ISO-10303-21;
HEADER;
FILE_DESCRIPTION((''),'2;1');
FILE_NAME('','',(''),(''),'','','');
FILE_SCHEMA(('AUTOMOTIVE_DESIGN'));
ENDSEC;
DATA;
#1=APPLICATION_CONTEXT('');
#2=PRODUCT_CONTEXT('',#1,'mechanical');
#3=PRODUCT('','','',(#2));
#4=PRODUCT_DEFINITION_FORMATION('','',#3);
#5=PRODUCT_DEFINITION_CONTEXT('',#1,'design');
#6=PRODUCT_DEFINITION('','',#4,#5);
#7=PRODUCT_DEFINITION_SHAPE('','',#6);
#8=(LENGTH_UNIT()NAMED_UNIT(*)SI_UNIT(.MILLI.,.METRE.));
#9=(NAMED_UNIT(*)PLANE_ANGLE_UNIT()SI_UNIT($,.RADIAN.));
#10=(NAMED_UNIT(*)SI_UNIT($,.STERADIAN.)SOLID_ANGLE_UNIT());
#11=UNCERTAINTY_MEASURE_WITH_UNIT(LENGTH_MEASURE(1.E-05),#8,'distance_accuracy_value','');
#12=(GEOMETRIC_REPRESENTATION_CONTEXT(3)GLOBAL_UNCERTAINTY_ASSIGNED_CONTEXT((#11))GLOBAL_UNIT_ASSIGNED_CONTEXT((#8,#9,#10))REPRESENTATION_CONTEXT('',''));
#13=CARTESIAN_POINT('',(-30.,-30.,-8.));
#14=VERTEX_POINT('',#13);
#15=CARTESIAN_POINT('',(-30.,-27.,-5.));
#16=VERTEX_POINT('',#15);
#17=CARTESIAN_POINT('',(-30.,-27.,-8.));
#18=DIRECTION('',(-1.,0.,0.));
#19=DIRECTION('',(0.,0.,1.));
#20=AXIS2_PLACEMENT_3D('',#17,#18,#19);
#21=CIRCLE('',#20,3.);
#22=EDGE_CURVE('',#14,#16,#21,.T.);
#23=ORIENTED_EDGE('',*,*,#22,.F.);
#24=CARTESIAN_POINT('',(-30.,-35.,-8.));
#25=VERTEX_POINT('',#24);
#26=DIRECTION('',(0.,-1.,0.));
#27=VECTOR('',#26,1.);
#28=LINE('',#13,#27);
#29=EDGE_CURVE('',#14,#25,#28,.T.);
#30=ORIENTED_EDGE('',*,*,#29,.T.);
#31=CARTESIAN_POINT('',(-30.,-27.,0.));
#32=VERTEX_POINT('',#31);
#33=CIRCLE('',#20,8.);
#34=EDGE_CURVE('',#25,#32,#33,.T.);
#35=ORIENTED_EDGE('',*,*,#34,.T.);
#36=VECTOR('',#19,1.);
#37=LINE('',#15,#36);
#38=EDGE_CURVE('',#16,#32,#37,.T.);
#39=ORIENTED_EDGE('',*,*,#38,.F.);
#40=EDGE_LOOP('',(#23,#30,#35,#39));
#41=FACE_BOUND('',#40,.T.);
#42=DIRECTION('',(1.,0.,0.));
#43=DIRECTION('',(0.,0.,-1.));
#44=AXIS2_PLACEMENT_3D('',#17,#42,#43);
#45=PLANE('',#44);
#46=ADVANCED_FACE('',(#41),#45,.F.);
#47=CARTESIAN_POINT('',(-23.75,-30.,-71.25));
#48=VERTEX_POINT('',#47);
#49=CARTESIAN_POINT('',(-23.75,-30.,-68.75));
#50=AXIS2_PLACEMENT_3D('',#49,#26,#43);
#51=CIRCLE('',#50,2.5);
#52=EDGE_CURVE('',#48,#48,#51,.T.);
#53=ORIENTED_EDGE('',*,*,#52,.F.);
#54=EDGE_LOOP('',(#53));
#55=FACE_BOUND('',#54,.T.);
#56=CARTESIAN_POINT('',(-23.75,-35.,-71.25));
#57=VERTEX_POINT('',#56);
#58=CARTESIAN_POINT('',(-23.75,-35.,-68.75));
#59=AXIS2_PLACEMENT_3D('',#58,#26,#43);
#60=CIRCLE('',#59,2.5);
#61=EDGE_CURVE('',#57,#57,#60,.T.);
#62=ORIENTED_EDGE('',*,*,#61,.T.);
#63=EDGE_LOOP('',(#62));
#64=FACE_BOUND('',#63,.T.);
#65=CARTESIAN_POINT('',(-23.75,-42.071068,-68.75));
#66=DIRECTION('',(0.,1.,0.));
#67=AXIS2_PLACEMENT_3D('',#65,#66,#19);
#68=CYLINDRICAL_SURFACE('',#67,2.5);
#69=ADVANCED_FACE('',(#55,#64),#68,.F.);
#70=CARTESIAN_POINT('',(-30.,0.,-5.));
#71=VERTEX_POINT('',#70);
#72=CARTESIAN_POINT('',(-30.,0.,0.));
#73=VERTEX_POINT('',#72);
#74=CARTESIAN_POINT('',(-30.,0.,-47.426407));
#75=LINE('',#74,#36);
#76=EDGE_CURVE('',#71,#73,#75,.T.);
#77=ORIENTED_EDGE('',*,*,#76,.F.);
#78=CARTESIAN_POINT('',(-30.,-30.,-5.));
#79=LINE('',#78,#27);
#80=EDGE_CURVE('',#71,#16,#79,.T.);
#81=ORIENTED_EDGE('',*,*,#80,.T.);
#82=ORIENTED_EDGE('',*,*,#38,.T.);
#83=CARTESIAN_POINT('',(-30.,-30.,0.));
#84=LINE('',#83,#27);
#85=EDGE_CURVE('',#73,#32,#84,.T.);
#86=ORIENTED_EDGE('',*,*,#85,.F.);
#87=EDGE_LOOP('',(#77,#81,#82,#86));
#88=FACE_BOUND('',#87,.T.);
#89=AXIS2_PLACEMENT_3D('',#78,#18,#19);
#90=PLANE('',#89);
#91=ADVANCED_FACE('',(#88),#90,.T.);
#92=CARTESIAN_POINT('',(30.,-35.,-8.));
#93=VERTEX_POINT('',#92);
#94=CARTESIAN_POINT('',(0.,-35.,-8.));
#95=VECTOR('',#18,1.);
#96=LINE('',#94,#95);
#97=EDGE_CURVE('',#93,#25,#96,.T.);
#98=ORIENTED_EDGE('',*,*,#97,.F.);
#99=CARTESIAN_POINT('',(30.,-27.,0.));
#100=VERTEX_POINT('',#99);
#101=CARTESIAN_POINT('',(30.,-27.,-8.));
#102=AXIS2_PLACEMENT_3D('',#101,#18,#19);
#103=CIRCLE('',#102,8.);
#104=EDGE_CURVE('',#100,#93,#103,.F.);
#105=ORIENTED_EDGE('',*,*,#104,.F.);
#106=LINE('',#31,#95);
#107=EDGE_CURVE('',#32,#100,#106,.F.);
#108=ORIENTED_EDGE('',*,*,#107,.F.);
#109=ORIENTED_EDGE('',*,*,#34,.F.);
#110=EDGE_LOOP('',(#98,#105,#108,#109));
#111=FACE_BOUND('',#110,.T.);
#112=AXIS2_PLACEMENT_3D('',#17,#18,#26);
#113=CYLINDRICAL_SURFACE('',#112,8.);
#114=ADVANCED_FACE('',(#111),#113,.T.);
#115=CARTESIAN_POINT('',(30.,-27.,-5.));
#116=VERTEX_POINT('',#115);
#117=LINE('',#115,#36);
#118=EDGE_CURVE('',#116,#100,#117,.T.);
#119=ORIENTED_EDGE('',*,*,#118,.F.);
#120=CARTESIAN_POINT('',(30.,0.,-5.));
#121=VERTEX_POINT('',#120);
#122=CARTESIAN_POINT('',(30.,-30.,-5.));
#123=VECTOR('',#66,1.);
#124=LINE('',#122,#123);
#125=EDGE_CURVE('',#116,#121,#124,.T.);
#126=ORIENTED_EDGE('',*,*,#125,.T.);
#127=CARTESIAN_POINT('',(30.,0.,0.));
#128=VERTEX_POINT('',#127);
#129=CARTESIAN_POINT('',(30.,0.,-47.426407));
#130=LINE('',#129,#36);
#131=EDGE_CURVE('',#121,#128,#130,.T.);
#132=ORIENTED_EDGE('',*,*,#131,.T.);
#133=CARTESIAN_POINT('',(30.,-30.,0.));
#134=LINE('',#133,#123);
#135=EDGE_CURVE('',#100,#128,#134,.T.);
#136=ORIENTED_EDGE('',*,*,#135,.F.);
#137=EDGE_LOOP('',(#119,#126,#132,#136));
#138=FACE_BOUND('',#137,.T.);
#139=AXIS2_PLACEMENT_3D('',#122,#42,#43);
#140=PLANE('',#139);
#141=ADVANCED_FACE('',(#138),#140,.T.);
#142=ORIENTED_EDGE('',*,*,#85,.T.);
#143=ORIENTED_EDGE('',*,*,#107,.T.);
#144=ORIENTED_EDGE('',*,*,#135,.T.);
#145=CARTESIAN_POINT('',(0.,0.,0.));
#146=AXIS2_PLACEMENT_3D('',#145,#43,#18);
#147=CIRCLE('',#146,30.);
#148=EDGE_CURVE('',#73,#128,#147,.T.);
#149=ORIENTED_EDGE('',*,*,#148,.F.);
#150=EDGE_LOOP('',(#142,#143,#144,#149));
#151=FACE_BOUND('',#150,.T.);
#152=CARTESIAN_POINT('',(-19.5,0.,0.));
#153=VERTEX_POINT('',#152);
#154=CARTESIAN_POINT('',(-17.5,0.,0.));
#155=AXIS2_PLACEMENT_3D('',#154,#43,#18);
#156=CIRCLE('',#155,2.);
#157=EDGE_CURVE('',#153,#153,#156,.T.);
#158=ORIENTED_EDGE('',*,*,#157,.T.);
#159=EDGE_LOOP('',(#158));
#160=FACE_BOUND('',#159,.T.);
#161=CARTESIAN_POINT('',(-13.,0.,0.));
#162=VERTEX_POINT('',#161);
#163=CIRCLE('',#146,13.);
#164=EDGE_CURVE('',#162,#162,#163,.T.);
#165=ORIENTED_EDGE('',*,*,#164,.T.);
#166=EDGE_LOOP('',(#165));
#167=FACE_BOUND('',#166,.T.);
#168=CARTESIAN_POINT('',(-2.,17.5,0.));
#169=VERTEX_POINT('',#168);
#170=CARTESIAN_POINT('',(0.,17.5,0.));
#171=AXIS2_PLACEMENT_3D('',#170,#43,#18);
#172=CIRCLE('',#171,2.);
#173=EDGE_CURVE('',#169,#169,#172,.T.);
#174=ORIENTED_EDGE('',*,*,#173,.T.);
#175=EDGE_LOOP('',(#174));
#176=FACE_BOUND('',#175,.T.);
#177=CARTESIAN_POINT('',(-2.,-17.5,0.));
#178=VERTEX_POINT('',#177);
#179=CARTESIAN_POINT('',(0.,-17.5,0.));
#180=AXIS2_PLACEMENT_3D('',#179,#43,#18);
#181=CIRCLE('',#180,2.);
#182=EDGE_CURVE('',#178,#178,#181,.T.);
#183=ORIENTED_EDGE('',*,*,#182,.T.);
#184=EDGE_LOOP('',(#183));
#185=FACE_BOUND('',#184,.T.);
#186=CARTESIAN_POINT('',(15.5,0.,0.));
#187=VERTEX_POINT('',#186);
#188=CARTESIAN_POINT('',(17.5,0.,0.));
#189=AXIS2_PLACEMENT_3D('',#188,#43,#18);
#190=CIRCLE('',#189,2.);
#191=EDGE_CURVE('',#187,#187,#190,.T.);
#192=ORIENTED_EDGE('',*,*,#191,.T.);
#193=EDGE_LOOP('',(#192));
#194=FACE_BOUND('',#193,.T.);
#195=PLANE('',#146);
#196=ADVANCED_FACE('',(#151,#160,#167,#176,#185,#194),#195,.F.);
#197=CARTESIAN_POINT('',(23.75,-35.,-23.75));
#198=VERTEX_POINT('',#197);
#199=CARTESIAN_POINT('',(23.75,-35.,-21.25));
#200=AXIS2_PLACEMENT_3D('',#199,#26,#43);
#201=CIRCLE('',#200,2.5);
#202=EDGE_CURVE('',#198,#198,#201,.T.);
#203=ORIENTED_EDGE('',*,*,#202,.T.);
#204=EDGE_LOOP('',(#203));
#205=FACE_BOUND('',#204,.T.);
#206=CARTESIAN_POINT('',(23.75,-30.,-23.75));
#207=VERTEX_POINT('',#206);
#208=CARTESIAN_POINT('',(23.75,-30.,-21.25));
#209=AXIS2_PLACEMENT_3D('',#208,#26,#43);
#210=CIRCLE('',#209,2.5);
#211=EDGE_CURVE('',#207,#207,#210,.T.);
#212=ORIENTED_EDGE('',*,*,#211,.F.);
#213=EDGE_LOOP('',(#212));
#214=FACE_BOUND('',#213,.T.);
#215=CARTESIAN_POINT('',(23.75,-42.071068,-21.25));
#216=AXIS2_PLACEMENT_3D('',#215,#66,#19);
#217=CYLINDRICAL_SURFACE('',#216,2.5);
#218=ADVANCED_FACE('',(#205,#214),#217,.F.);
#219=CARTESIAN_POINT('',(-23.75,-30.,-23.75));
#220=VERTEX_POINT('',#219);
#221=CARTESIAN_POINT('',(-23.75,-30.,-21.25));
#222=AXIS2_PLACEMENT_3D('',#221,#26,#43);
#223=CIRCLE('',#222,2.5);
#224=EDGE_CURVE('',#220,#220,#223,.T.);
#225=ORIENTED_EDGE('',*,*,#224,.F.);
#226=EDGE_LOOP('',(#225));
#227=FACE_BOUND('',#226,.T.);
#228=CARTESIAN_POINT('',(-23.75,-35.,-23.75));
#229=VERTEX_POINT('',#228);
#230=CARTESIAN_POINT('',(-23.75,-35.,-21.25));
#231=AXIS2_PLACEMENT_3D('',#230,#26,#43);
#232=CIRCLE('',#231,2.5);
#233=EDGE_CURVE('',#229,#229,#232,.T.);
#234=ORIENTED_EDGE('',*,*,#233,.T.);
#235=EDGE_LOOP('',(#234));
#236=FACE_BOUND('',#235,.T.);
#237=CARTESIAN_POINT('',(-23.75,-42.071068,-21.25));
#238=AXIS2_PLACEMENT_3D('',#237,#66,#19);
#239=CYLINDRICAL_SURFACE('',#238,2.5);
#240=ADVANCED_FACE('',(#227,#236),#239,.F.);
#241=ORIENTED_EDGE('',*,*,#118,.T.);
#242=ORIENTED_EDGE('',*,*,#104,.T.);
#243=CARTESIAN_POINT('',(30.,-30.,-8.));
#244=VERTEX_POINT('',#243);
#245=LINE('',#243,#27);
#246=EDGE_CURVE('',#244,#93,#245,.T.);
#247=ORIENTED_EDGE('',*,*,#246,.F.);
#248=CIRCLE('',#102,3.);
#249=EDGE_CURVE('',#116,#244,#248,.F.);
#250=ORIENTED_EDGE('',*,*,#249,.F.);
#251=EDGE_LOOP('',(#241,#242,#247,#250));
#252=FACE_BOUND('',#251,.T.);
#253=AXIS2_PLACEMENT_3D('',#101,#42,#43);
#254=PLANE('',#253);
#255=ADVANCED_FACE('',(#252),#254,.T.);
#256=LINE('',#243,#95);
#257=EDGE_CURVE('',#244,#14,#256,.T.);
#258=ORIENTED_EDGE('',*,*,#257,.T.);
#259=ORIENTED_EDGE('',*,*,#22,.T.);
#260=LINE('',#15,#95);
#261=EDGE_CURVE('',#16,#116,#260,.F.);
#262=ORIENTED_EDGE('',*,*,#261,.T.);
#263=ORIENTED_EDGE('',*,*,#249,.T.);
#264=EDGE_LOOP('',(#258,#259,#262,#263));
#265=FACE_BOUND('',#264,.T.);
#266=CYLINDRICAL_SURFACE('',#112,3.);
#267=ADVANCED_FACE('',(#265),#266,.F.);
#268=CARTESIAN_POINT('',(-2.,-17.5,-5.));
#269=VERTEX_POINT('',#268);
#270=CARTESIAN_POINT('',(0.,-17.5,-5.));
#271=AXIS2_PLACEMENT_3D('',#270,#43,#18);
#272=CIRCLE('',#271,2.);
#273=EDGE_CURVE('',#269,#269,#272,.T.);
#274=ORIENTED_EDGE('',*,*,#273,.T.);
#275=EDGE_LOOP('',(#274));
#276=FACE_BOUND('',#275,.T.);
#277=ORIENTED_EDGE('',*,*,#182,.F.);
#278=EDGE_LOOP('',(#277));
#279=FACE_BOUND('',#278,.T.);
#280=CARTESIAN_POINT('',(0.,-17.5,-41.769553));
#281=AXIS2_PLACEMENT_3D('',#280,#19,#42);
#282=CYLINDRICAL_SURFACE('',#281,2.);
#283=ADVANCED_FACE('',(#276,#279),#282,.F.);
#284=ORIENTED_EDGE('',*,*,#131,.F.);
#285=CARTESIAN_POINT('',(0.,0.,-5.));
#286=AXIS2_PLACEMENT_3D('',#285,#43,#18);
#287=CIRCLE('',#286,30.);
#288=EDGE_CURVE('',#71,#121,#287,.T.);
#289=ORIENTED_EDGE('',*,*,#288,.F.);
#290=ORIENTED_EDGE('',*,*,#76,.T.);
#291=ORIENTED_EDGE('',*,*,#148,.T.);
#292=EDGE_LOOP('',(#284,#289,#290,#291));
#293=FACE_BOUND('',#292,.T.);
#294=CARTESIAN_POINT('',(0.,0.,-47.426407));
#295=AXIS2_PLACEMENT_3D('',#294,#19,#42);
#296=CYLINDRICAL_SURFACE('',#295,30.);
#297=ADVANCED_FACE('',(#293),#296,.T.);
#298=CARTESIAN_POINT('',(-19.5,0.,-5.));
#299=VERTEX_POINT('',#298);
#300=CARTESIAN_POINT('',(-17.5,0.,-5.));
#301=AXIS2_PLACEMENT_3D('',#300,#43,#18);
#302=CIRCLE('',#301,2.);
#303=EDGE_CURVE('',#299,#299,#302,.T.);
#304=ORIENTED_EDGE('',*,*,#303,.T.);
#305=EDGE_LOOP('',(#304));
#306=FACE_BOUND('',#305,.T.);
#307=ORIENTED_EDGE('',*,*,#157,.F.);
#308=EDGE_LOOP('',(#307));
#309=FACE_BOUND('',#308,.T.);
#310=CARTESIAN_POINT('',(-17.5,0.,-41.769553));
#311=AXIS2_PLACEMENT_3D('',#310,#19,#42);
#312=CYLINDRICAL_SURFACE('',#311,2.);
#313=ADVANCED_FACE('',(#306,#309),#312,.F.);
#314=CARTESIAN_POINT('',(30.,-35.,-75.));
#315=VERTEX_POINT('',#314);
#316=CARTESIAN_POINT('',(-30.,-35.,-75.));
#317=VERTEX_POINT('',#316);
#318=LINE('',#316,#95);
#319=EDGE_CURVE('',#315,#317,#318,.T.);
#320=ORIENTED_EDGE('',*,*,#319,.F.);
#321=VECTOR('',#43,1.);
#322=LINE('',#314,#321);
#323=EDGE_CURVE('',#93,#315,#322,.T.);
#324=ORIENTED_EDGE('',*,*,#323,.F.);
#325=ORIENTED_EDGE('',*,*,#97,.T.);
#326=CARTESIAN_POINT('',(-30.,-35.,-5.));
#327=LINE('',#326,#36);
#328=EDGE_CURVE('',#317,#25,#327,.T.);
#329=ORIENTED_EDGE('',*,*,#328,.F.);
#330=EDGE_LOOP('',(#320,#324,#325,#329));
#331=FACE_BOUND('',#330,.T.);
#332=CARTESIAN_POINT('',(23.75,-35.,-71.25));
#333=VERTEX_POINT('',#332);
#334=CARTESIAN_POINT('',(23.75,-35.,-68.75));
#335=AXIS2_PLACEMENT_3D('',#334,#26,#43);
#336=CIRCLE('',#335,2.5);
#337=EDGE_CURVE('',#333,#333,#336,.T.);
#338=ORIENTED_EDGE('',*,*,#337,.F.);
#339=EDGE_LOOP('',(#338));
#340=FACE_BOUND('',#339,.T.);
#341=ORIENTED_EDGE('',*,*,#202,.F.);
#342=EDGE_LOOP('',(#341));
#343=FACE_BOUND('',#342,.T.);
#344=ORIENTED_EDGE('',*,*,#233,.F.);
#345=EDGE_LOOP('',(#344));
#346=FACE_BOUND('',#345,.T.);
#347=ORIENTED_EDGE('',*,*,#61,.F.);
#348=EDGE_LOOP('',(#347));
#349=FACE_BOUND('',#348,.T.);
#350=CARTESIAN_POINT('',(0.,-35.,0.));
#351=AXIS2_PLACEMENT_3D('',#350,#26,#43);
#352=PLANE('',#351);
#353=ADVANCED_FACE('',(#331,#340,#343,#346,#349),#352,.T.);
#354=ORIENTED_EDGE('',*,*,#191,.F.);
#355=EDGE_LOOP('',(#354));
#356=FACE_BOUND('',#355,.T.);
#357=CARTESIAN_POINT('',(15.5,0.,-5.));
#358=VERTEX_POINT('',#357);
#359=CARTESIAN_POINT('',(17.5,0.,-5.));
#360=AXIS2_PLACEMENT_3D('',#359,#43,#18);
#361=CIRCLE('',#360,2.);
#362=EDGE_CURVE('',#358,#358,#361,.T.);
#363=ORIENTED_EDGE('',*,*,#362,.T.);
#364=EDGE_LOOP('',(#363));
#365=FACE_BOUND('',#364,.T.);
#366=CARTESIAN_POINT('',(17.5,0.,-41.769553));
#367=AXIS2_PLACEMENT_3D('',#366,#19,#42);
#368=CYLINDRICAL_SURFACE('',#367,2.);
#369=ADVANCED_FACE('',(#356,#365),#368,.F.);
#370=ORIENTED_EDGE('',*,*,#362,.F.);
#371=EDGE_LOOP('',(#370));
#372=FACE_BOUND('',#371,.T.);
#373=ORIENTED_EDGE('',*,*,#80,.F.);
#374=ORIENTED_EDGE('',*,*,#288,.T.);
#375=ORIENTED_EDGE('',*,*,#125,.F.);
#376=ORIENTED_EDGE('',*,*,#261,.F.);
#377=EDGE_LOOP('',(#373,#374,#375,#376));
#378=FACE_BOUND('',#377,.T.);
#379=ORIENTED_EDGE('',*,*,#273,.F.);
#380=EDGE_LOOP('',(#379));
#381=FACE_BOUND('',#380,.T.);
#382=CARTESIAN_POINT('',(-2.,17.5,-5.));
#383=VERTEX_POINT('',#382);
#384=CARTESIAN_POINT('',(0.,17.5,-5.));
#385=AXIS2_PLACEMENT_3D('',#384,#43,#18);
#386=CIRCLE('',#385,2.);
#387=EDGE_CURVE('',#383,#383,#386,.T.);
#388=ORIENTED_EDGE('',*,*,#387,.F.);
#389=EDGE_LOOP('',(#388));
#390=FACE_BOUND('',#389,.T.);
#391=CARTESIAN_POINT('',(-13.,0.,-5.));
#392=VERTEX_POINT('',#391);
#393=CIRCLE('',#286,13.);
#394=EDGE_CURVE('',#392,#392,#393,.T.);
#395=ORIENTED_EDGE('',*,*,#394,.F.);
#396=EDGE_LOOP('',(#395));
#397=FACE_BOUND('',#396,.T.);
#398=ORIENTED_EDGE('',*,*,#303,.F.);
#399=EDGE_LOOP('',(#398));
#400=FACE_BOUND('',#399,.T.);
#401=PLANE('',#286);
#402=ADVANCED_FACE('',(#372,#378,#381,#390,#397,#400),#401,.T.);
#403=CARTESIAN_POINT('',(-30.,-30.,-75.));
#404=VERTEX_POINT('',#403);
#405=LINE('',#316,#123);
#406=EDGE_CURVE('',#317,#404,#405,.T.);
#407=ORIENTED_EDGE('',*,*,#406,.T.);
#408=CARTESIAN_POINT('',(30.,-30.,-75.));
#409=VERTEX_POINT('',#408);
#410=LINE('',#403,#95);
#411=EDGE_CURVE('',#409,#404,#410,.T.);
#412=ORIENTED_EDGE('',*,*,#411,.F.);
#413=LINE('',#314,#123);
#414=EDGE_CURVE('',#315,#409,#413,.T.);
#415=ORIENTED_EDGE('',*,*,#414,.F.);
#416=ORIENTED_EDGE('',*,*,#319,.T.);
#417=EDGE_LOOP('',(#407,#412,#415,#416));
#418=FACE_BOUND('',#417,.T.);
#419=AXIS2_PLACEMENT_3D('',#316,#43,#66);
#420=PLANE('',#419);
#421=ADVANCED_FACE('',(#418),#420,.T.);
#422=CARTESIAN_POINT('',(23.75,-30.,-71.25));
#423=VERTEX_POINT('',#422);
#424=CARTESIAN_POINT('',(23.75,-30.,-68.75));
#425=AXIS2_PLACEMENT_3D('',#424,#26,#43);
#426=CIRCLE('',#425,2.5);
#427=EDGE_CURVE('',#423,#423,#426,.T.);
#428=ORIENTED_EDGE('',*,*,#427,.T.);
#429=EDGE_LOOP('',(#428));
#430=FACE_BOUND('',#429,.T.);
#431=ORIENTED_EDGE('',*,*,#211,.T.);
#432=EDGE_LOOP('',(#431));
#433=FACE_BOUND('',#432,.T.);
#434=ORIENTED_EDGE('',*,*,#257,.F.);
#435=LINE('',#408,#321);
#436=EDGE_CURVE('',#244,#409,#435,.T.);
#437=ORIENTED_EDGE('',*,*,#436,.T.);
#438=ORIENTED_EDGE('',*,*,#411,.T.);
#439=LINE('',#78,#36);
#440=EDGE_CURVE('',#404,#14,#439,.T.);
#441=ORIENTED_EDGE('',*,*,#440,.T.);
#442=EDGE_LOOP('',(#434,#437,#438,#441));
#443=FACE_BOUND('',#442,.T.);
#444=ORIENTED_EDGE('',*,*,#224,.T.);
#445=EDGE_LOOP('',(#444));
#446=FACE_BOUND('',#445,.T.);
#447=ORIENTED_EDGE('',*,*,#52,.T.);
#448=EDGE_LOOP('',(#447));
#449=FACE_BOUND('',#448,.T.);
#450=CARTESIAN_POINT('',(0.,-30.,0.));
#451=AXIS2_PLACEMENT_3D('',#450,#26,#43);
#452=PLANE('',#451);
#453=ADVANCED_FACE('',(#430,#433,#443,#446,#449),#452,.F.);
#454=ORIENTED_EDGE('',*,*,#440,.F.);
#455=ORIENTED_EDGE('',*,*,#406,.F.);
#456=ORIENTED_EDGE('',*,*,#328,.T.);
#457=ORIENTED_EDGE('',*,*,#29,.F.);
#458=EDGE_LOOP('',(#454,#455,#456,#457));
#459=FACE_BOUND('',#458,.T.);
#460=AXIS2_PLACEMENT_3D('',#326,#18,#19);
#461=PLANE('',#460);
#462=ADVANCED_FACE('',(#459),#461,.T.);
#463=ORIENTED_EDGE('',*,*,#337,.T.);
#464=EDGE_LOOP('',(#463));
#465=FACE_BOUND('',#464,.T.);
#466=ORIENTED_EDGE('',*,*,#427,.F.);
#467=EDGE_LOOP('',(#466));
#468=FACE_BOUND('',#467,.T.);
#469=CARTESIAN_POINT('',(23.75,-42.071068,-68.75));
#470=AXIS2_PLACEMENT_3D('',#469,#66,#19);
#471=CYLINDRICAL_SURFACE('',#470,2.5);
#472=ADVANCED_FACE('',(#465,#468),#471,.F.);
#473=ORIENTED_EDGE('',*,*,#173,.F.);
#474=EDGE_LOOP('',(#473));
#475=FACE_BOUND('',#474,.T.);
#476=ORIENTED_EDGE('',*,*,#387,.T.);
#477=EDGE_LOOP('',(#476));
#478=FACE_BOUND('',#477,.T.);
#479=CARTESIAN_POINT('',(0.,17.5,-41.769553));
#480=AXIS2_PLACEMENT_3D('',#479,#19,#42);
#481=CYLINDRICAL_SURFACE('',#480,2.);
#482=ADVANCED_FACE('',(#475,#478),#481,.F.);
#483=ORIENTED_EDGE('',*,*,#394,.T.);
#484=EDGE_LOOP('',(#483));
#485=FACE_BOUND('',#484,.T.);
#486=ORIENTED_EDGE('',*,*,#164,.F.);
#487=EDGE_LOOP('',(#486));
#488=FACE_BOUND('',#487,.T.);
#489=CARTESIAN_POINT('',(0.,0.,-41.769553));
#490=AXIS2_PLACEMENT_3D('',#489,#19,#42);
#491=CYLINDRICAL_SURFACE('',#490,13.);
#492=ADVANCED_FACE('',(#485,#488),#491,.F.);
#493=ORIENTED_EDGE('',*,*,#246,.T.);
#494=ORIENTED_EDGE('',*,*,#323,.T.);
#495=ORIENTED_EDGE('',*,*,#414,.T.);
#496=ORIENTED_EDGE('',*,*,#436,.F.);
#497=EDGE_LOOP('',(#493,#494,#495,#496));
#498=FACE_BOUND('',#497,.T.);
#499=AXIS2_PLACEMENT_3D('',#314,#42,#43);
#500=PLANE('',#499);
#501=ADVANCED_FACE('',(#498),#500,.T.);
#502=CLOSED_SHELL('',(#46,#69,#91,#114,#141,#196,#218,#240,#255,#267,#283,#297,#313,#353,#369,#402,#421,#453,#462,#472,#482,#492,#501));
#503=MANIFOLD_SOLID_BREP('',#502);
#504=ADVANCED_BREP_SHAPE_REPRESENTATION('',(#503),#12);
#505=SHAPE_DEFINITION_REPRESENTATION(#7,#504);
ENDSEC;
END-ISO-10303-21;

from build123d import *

# Parameters (mm, degrees)
SKETCH_10_W                      = 60
SKETCH_10_H                      = 60
SM_BASE_FLANGE_2_DEPTH           = 5
SM_EDGE_FLANGE_2_STRIP_W         = 26
SM_EDGE_FLANGE_2_STRIP_H         = 5
SM_EDGE_FLANGE_2_STRIP_CUT_DEPTH = 60
SM_EDGE_FLANGE_2_DEPTH           = 60
SKETCH_19_R                      = 2
SKETCH_19_R_2                    = 13
CUT_EXTRUDE_2_DEPTH              = 5
CUT_EXTRUDE_START                = -30
SKETCH_28_R                      = 2.5
CUT_EXTRUDE_4_DEPTH              = 5
CUT_EXTRUDE_5_DEPTH              = 5


# Sheet-metal steps are written as plain solids
with BuildPart() as part:
    # 草图10 → 基体-法兰2 (new body)
    with BuildSketch(Plane.XY):
        Rectangle(SKETCH_10_W, SKETCH_10_H)
    extrude(amount=-SM_BASE_FLANGE_2_DEPTH)

    # 边线-法兰2 strip (across the edge) → 边线-法兰2 strip cut (cut)
    with BuildSketch(Plane(origin=(30, -30, -5), x_dir=(0, 1, 0), z_dir=(-1, 0, 0))):
        with Locations((-10, -2.5)):
            Rectangle(SM_EDGE_FLANGE_2_STRIP_W, SM_EDGE_FLANGE_2_STRIP_H)
    extrude(amount=SM_EDGE_FLANGE_2_STRIP_CUT_DEPTH, mode=Mode.SUBTRACT)

    # 边线-法兰2 section (across the edge) → 边线-法兰2 (add)
    with BuildSketch(Plane(origin=(30, -30, -5), x_dir=(0, 1, 0), z_dir=(-1, 0, 0))):
        with BuildLine():
            Line((-5, 3), (-5, 70))
            Line((-5, 70), (0, 70))
            Line((0, 70), (0, 3))
            ThreePointArc((0, 3), (0.878679656, 0.878679656), (3, 0))
            Line((3, 0), (3, -5))
            ThreePointArc((3, -5), (-2.656854249, -2.656854249), (-5, 3))
        make_face()
    extrude(amount=SM_EDGE_FLANGE_2_DEPTH)

    # 草图19 → 切除-拉伸2 (cut)
    with BuildSketch(Plane.XY):
        with Locations(Location((-17.5, 0, 0), (0, 0, 180))):
            Circle(SKETCH_19_R)
        with Locations(Location((17.5, 0, 0), (0, 0, 180))):
            Circle(SKETCH_19_R)
        with Locations(Location((0, 17.5, 0), (0, 0, 180))):
            Circle(SKETCH_19_R)
        with Locations(Location((0, -17.5, 0), (0, 0, 180))):
            Circle(SKETCH_19_R)
        with Locations(Location((0, 0, 0), (0, 0, 180))):
            Circle(SKETCH_19_R_2)
    extrude(amount=-CUT_EXTRUDE_2_DEPTH, mode=Mode.SUBTRACT)

    # 草图28 → 切除-拉伸4 (cut)
    with BuildSketch(Plane(origin=(0, 0, 0), x_dir=(1, 0, 0), z_dir=(0, 1, 0)).offset(CUT_EXTRUDE_START)):
        with Locations(Location((-23.75, 21.25, 0), (0, 0, 90))):
            Circle(SKETCH_28_R)
        with Locations(Location((-23.75, 68.75, 0), (0, 0, 90))):
            Circle(SKETCH_28_R)
        with Locations(Location((23.75, 68.75, 0), (0, 0, 90))):
            Circle(SKETCH_28_R)
        with Locations(Location((23.75, 21.25, 0), (0, 0, 90))):
            Circle(SKETCH_28_R)
    extrude(amount=-CUT_EXTRUDE_4_DEPTH, mode=Mode.SUBTRACT)

    # 草图29 → 切除-拉伸5 (cut)
    with BuildSketch(Plane.XY):
        with BuildLine():
            ThreePointArc((-30, 0), (-21.213203436, 21.213203436), (0, 30))
            Line((0, 30), (-30, 30))
            Line((-30, 30), (-30, 0))
        make_face()
        with BuildLine():
            Line((30, 30), (0, 30))
            ThreePointArc((0, 30), (21.213203436, 21.213203436), (30, 0))
            Line((30, 0), (30, 30))
        make_face()
    extrude(amount=-CUT_EXTRUDE_5_DEPTH, mode=Mode.SUBTRACT)


solid = part.part
